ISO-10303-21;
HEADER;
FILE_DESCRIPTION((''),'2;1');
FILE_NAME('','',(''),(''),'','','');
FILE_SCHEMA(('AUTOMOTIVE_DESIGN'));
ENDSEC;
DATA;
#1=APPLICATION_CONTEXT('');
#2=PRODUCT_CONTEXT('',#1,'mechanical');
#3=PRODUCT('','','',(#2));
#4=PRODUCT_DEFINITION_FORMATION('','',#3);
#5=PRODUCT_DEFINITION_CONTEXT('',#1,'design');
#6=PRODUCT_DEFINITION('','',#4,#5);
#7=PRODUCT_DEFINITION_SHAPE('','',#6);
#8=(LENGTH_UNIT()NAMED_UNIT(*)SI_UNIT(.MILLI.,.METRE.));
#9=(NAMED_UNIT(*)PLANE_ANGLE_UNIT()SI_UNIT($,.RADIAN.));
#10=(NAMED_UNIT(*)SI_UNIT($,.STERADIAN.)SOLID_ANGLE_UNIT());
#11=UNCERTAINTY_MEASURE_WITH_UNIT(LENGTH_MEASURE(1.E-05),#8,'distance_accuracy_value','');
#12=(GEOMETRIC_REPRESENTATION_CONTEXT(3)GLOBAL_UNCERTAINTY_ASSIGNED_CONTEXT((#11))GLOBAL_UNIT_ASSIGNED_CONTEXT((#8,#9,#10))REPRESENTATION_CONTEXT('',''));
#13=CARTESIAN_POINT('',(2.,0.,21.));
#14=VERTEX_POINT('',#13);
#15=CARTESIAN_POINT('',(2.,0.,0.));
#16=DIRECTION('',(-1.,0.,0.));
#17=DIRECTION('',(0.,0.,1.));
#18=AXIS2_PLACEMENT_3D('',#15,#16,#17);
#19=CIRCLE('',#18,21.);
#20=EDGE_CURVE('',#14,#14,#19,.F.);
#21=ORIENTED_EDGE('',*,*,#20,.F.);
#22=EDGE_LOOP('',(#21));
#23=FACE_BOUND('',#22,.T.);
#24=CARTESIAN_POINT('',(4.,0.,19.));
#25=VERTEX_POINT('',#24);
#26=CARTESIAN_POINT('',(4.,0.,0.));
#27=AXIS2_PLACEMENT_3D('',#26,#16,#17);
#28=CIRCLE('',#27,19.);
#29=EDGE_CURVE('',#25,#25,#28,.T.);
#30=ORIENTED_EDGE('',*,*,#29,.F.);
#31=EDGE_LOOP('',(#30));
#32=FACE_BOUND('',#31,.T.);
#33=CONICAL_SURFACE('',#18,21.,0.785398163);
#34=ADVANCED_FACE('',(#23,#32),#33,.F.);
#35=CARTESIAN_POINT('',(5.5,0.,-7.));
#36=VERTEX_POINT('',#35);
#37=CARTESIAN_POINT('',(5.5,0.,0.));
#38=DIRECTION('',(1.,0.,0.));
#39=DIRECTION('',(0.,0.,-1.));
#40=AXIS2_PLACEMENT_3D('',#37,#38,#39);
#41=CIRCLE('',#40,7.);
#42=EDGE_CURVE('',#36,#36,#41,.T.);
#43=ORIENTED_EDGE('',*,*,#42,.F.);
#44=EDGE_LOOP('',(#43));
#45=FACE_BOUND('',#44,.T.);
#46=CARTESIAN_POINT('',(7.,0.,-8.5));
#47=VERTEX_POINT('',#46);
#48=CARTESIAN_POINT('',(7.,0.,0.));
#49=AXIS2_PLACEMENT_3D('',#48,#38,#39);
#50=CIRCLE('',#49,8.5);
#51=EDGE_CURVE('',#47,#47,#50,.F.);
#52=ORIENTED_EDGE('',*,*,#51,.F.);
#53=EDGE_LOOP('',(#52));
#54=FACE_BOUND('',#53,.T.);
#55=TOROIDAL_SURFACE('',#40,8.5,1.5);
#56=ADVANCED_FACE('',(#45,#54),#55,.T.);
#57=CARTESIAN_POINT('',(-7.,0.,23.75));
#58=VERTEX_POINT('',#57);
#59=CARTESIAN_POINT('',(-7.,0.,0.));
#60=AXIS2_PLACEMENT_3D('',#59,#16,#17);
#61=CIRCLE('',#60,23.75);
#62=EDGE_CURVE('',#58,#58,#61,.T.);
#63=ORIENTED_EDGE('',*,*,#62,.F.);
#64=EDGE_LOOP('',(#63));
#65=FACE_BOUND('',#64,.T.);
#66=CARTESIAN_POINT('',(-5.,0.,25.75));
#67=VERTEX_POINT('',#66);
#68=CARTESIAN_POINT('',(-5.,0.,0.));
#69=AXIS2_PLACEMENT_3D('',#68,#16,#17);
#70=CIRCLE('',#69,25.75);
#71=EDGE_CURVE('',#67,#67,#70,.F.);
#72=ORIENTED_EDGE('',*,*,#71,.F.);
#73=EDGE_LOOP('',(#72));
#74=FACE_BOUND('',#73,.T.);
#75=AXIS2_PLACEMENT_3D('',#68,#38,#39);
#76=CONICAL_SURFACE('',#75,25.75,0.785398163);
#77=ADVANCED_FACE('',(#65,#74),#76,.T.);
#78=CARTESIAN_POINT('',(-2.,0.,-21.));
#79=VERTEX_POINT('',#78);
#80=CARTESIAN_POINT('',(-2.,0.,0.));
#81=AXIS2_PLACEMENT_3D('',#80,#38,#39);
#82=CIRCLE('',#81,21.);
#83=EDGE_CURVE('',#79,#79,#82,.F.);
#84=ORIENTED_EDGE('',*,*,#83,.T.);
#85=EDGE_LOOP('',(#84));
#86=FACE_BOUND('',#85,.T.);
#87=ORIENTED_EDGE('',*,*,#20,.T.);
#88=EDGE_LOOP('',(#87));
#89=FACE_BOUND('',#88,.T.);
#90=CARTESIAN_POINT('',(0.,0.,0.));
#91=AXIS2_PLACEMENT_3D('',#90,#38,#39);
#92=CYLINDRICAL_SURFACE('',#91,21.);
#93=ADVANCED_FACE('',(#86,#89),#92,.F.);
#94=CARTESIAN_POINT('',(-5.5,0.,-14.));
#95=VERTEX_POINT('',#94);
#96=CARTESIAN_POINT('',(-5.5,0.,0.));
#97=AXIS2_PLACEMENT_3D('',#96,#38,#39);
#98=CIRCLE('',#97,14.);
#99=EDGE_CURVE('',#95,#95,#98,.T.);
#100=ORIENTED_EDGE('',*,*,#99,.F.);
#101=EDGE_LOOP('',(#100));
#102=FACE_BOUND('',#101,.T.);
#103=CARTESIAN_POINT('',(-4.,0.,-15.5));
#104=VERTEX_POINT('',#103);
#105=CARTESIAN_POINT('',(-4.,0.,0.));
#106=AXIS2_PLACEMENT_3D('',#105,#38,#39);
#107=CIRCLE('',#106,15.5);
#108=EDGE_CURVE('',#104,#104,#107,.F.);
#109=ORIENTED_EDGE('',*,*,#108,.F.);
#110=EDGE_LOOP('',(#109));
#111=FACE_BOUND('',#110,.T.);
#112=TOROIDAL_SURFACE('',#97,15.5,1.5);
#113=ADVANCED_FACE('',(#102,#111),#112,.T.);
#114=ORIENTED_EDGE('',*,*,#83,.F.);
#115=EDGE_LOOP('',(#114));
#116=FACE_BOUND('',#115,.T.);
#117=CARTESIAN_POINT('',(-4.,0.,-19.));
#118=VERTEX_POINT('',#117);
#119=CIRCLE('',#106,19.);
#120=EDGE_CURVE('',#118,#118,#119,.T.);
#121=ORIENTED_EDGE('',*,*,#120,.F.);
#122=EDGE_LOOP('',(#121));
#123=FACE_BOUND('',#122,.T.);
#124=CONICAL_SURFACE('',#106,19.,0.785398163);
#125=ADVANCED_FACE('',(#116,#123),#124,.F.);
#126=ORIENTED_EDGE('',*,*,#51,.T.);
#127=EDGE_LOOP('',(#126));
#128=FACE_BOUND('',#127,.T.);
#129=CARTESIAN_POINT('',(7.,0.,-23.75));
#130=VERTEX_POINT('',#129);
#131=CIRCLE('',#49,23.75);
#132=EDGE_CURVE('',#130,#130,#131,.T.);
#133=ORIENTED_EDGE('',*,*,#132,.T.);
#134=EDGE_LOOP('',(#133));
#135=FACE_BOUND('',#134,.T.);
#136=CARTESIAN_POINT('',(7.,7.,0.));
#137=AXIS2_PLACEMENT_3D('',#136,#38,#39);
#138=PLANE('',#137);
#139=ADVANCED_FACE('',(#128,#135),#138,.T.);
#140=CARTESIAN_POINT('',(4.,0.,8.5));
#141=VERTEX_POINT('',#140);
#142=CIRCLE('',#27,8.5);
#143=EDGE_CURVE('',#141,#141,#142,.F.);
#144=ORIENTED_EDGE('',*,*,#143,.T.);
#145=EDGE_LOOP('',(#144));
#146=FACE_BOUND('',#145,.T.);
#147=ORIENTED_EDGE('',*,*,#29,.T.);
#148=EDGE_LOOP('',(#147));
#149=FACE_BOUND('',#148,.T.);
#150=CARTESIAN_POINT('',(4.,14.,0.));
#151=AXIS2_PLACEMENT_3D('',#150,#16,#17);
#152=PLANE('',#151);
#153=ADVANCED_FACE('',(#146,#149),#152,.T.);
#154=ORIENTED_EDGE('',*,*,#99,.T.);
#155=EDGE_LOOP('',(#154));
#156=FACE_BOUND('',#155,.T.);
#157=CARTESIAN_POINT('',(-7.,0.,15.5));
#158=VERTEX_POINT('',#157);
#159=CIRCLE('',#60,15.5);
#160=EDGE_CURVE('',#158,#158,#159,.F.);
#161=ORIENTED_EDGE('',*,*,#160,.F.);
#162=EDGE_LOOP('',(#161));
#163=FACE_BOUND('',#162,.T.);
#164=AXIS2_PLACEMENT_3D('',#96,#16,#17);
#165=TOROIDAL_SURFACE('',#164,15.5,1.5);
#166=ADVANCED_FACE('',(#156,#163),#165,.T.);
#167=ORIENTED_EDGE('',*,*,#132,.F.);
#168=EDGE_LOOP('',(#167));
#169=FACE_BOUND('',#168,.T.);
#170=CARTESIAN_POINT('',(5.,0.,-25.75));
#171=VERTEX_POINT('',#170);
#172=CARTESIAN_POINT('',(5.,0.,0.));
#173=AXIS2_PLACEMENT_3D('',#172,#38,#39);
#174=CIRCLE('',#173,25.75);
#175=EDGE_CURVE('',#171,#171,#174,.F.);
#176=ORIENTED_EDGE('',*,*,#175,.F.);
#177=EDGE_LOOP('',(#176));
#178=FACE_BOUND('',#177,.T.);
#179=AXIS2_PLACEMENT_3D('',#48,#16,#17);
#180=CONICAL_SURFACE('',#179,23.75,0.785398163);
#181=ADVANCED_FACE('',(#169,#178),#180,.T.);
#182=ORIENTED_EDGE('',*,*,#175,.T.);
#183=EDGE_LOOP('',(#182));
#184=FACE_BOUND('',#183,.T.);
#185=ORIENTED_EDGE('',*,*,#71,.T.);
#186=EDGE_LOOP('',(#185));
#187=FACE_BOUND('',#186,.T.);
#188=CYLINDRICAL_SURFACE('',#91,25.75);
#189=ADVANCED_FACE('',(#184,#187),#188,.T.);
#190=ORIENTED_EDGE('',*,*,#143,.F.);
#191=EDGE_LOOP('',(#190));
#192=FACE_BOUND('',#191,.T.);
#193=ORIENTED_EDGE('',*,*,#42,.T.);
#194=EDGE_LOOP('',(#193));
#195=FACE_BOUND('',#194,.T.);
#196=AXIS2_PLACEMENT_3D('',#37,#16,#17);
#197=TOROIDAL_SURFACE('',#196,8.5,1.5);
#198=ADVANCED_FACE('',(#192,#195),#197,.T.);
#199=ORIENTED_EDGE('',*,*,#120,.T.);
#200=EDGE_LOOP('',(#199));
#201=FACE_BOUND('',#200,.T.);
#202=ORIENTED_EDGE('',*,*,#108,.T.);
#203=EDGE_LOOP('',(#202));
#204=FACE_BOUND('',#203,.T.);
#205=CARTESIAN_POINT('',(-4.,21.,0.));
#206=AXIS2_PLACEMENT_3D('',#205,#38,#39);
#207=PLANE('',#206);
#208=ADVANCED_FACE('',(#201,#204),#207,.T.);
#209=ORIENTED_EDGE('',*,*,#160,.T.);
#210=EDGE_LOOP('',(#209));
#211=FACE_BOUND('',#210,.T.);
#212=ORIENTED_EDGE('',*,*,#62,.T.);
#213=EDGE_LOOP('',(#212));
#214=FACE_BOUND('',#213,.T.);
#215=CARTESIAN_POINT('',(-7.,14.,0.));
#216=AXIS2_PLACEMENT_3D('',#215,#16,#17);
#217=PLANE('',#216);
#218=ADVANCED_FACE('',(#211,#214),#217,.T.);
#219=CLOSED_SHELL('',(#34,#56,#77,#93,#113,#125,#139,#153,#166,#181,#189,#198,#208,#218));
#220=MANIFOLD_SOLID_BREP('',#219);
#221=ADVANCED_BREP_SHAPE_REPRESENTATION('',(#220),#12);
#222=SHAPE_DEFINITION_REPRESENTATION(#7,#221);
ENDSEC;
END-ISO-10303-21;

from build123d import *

# Parameters (mm, degrees)
CHAMFER1_SIZE = 2
FILLET1_R     = 1.5


with BuildPart() as part:
    # Sketch1 → Revolve1 (revolve)
    with BuildSketch(Plane.XY, mode=Mode.PRIVATE) as revolve1_sk:
        Polygon((-7, 14), (-7, 25.75), (7, 25.75), (7, 14), (7, 7), (4, 7), (4, 14), (4, 21), (-4, 21), (-4, 14), align=None)
    revolve(revolve1_sk.sketch.rotate(Axis((0, 0, 0), (-1, 0, 0)), 90), axis=Axis((0, 0, 0), (-1, 0, 0)))

    # Chamfer1
    chamfer1_edges = [part.edges().sort_by_distance(p)[0] for p in [
        (7, 0, 25.75),
        (-7, 0, 25.75),
        (-4, 0, 21),
        (4, 0, 21),
    ]]
    chamfer(chamfer1_edges, length=CHAMFER1_SIZE)

    # Fillet1
    fillet1_edges = [part.edges().sort_by_distance(p)[0] for p in [
        (7, 0, 7),
        (-7, 0, 14),
        (-4, 0, 14),
        (4, 0, 7),
    ]]
    fillet(fillet1_edges, radius=FILLET1_R - 0.0001)  # a hair under: the kernel refuses the full size


solid = part.part
